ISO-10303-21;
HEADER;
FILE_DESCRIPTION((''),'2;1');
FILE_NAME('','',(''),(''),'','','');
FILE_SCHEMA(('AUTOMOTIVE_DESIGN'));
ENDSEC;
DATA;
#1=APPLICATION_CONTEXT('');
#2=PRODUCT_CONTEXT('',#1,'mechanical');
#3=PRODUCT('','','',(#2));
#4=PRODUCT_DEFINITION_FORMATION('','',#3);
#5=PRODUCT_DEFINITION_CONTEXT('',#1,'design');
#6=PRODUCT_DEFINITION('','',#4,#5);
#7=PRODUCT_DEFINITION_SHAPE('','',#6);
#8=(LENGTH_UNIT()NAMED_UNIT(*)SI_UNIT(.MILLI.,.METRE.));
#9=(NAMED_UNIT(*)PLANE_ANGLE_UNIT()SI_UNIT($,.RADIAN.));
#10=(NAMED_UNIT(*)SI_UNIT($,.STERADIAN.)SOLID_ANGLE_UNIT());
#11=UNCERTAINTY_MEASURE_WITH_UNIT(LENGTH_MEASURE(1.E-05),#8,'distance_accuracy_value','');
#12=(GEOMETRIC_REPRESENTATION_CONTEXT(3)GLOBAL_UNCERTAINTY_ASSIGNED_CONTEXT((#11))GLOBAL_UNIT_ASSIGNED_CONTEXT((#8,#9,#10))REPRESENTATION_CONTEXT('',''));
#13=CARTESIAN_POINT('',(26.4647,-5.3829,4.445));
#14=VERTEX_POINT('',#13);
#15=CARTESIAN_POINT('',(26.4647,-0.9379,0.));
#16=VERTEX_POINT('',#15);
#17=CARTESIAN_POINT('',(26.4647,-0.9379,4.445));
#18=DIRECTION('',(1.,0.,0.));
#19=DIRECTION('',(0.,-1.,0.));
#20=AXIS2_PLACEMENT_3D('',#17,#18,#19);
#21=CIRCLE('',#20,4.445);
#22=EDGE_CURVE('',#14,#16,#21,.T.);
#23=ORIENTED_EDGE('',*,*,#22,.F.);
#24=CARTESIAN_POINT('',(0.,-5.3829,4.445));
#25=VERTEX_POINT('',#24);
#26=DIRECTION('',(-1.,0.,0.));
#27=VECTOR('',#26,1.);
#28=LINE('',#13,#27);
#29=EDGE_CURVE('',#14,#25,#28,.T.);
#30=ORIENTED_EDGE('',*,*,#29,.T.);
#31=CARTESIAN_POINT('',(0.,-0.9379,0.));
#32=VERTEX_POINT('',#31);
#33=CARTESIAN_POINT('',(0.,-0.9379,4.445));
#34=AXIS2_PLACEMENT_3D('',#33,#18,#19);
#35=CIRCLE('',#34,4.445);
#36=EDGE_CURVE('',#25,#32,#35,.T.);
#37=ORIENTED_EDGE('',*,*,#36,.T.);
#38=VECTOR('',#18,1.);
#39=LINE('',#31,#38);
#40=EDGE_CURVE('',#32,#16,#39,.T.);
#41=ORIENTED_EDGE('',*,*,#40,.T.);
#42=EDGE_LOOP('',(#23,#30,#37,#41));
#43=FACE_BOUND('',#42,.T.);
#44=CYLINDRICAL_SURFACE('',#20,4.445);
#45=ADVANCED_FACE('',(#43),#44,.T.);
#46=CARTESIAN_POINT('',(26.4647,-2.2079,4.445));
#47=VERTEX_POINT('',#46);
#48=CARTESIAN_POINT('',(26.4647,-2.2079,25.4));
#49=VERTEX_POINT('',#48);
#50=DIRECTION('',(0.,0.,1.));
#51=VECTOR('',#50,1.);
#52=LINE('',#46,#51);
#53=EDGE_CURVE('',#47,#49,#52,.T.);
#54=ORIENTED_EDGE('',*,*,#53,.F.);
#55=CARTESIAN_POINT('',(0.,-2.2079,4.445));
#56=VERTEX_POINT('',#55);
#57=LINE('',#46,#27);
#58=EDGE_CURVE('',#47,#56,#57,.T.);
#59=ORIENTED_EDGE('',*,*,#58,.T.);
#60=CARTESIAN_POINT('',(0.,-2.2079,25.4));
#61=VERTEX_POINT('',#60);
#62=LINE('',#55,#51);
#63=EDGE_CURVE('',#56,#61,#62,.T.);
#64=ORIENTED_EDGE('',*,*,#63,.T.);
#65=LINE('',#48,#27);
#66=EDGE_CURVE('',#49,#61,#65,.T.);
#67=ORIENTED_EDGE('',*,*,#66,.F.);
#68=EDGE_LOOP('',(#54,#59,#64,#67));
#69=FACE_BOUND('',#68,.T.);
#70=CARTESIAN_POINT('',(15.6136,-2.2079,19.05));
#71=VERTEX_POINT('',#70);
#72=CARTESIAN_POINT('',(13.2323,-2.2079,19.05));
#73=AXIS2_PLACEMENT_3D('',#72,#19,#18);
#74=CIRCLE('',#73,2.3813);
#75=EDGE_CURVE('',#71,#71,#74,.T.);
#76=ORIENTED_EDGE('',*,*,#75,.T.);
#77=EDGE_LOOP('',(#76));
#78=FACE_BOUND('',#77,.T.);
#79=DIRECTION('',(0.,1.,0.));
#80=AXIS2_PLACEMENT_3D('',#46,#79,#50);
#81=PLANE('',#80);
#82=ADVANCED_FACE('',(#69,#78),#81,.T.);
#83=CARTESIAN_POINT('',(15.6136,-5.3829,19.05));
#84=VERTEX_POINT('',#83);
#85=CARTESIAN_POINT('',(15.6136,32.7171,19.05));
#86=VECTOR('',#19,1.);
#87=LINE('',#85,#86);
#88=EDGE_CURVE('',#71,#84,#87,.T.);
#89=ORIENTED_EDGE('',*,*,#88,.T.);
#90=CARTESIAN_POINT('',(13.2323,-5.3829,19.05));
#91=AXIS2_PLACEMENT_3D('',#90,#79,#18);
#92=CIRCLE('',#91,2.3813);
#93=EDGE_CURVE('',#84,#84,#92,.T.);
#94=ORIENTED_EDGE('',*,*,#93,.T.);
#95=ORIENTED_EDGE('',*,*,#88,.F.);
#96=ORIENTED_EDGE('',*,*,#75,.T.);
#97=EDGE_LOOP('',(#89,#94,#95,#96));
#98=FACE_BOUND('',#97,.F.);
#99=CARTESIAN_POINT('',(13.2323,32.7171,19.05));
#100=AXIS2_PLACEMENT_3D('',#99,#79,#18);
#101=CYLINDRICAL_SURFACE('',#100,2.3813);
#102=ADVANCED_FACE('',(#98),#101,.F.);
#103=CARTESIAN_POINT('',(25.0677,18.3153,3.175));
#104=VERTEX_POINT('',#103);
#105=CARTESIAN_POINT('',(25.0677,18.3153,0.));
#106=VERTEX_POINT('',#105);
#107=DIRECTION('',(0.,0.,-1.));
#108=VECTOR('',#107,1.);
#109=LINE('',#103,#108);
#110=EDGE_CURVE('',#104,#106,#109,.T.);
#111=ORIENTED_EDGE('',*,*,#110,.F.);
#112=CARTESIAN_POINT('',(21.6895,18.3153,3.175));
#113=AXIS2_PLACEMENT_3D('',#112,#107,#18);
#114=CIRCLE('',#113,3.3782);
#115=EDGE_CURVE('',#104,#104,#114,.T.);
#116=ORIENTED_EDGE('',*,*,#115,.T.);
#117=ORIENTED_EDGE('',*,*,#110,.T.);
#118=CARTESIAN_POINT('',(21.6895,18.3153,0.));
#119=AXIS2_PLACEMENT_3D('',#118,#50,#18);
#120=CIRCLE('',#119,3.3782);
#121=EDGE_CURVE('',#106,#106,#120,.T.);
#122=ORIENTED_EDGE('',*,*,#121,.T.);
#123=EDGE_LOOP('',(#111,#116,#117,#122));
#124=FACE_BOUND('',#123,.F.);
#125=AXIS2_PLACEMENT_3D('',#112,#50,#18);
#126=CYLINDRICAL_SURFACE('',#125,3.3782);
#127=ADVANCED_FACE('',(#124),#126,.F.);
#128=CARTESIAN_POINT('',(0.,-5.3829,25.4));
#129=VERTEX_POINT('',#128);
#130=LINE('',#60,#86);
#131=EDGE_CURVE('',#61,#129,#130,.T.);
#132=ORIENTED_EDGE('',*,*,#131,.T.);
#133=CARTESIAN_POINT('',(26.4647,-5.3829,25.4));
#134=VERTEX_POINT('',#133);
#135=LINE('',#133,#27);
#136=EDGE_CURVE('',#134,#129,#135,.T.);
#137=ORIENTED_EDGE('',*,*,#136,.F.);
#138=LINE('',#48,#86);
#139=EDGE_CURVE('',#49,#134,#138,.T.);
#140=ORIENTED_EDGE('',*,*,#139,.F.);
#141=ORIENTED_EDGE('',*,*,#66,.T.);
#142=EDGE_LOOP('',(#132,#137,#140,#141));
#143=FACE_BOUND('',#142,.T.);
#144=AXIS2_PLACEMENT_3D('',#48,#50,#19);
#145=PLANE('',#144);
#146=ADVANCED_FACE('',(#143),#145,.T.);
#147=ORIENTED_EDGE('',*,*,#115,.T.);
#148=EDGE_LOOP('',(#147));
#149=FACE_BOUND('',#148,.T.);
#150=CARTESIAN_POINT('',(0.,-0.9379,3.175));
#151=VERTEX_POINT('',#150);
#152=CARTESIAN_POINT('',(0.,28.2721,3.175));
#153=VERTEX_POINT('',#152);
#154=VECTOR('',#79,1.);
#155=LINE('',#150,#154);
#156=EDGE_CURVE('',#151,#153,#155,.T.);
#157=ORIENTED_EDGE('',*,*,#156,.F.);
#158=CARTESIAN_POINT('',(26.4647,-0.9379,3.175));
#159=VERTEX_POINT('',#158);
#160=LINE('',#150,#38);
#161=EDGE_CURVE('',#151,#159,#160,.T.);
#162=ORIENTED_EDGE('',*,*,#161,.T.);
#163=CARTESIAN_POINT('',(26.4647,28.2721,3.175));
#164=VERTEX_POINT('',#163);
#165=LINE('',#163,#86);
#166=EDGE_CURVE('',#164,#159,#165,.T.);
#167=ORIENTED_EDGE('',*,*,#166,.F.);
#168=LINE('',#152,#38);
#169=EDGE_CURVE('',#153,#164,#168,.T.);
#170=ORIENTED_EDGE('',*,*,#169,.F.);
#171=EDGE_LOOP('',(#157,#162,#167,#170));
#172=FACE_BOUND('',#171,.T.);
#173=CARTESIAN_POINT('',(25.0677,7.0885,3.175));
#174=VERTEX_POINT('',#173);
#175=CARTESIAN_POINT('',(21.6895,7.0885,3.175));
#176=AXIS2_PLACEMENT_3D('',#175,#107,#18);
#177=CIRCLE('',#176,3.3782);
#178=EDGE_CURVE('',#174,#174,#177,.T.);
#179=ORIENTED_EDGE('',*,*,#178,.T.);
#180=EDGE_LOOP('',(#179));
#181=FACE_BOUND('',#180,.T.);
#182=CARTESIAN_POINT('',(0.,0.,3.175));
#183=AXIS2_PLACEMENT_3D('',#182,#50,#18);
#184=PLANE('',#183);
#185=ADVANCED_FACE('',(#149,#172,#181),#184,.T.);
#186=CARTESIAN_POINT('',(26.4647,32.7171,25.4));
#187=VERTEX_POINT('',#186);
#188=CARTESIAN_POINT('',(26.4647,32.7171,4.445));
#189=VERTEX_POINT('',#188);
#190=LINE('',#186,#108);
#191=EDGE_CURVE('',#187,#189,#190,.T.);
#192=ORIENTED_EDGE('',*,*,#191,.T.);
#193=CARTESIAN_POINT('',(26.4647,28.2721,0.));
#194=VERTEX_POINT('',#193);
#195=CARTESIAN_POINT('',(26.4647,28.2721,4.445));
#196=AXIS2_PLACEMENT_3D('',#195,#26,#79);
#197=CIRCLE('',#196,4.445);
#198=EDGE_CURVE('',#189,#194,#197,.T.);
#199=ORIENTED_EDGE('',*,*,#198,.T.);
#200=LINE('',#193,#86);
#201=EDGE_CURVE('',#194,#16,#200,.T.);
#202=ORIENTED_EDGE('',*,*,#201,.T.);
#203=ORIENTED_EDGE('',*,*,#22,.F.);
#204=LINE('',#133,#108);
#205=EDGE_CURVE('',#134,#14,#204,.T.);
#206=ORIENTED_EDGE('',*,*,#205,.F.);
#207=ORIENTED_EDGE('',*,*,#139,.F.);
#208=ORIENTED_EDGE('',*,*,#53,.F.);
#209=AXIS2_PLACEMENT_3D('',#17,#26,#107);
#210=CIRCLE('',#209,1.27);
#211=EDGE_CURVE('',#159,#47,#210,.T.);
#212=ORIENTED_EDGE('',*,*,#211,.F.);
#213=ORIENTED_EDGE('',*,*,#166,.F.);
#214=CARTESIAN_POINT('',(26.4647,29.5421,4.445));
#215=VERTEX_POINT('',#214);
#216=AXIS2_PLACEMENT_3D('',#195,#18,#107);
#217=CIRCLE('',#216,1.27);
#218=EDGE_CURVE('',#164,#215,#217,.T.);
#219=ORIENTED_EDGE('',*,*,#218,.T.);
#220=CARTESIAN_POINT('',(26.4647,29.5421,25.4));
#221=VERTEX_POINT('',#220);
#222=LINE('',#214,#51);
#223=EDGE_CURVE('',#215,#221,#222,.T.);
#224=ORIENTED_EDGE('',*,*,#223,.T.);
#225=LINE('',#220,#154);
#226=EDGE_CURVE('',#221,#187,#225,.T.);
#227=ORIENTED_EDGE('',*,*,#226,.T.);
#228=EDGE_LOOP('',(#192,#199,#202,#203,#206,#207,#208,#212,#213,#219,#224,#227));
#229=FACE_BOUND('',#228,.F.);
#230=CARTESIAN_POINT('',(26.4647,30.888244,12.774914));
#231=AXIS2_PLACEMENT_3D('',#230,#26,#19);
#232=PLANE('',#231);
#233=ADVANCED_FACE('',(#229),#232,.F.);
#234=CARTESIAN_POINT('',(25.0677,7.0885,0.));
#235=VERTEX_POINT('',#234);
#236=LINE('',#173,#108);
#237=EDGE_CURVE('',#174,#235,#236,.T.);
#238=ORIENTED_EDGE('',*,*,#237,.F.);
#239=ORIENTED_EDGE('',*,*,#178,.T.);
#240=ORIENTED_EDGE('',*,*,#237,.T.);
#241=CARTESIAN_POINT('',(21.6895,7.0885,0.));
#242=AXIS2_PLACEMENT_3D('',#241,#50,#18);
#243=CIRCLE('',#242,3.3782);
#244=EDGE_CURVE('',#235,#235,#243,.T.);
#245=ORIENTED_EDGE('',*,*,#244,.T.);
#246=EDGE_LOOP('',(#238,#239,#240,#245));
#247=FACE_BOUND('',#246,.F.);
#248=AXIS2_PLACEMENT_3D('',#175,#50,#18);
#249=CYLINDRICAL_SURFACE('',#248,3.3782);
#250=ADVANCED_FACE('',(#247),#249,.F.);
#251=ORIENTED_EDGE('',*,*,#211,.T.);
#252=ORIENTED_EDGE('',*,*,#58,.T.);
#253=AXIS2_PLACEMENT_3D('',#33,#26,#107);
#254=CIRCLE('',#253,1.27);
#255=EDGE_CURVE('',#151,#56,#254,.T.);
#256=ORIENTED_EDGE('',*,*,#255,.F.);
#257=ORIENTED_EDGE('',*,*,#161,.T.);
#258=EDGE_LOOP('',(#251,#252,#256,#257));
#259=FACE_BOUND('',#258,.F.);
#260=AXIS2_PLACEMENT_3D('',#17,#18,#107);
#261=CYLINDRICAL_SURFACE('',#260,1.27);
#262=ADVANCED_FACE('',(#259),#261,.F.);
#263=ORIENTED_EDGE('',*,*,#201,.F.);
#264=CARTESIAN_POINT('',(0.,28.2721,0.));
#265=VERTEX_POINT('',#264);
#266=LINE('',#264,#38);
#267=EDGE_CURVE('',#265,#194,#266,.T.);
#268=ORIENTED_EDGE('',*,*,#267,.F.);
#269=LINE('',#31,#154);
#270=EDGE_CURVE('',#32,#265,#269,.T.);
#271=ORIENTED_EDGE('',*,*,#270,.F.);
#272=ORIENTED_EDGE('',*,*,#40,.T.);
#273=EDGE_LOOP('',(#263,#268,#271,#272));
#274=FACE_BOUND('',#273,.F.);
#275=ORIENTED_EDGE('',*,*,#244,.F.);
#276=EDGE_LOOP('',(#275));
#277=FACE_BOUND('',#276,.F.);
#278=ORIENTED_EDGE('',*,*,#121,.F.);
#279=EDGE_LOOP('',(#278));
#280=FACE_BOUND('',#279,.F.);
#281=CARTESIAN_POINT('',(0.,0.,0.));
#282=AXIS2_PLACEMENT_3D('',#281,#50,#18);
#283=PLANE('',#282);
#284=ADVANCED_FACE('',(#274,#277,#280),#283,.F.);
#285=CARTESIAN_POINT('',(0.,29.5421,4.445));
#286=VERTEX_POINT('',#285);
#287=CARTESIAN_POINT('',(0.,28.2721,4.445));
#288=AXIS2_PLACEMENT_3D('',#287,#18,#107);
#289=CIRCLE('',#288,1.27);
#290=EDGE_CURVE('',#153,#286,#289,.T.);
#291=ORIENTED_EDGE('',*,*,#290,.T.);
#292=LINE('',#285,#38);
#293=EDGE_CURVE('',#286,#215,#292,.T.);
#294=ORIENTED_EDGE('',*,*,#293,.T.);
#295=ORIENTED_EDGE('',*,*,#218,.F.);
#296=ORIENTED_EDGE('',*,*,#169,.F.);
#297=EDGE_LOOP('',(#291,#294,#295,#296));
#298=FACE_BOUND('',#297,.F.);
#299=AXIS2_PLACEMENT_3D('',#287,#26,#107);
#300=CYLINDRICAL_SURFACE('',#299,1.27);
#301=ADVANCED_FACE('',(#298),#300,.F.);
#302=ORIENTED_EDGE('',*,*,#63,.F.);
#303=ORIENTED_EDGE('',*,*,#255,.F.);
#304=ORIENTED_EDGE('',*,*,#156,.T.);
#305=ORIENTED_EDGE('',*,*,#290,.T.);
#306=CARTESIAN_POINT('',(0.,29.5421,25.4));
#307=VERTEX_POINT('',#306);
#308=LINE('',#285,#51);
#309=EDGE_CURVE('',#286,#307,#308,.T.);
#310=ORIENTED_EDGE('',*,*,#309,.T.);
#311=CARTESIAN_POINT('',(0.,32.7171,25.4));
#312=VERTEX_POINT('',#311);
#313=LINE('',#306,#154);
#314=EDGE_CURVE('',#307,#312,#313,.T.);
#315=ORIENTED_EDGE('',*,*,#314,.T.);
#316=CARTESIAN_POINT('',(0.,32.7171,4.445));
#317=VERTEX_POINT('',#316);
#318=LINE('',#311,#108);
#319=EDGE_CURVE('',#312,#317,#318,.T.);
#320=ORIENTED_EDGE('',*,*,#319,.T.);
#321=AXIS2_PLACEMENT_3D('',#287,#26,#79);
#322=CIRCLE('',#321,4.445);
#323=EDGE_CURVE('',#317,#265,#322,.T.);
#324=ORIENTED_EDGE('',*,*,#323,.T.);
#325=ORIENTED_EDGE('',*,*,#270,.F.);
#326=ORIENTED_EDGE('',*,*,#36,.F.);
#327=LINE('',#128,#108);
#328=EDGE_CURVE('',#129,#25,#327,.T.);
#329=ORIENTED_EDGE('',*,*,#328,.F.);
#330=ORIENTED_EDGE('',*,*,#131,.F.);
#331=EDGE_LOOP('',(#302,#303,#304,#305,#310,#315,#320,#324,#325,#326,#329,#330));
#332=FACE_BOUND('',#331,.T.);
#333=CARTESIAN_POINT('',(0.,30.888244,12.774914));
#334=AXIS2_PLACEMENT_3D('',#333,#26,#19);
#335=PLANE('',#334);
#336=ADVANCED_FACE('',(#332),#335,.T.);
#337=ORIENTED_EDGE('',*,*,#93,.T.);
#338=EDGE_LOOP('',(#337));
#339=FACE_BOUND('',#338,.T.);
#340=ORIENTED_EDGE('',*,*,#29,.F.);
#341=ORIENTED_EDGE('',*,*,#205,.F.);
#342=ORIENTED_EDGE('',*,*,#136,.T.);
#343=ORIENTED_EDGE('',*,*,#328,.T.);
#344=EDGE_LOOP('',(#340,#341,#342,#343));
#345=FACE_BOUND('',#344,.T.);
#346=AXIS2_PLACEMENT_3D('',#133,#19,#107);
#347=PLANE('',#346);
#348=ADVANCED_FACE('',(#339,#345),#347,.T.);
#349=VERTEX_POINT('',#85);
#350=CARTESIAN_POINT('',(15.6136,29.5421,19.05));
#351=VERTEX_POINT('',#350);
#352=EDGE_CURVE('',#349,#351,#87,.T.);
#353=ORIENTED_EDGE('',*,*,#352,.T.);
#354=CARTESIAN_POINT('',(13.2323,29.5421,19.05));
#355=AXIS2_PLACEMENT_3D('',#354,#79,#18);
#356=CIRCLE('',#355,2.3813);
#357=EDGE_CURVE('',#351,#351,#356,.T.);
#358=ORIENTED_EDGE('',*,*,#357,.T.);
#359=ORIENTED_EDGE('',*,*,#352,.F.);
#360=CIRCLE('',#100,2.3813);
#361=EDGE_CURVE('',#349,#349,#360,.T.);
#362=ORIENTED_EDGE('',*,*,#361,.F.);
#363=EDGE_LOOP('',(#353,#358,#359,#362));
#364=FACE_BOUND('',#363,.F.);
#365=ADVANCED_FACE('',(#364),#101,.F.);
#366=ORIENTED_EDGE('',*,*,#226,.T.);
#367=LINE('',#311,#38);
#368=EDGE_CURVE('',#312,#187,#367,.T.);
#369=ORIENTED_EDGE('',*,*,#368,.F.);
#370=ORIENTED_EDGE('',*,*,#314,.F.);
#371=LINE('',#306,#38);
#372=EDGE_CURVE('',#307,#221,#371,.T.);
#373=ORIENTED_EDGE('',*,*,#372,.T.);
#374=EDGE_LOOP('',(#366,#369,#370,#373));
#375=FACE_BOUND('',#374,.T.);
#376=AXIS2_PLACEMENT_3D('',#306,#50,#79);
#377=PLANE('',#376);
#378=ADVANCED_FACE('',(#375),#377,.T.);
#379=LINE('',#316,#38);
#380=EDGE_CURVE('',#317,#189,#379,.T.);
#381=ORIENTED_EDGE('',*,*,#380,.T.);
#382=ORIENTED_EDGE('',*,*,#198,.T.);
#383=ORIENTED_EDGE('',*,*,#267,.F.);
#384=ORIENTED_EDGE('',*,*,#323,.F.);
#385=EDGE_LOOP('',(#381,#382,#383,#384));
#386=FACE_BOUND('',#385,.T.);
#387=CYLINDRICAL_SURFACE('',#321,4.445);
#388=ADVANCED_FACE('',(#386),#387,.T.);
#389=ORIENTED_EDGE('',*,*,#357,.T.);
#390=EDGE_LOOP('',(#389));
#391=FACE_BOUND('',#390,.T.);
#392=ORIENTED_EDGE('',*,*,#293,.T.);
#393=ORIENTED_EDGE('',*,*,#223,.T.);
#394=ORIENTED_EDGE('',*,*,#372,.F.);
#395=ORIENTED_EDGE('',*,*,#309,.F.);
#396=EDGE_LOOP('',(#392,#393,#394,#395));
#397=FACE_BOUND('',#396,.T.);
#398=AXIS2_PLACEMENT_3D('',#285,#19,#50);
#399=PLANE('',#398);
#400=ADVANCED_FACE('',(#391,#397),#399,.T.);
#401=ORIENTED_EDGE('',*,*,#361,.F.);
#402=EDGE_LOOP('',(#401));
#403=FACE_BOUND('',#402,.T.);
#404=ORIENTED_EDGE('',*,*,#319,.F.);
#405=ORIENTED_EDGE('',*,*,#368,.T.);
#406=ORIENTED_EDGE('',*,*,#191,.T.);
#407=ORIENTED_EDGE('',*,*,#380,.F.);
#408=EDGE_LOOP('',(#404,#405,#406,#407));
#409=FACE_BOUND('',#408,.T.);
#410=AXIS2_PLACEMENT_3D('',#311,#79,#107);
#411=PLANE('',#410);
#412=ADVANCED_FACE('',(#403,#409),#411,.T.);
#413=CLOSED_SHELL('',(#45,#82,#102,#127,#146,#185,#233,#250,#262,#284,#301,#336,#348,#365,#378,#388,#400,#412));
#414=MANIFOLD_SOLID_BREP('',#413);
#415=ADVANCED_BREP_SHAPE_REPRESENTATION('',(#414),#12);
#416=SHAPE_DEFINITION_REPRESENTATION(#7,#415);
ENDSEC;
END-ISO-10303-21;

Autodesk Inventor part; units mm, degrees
ref_plane "YZ Plane" through (0, 0, 0) normal (1, 0, 0) x (0, 1, 0)
ref_plane "XZ Plane" through (0, 0, 0) normal (0, 1, 0) x (-1, 0, 0)
ref_plane "XY Plane" through (0, 0, 0) normal (0, 0, 1) x (1, 0, 0)
sketch "Sketch1" plane through (0, 0, 0) normal (0, 0, 1) x (1, 0, 0)
  circle A0 centre (5.881, 13.6671) radius 3.1287
  circle A1 centre (20.5836, 13.6671) radius 3.1287
  line L0 (0, -0.9379) -> (26.4647, -0.9379)
  line L1 (26.4647, 28.2721) -> (26.4647, -0.9379)
  line L2 (0, 28.2721) -> (26.4647, 28.2721)
  line L3 (0, -0.9379) -> (0, 28.2721)
  point P0 (0, 0)
  dimension "d4" = 14.7026
  dimension "d5" = 29.21
  dimension "d21" = 14.605
extrude "Plate1" add sketch "Sketch1" along normal blind 3.175 contours A0 | A1 | L3 L2 L1 L0
sketch "Sketch2" plane through (0, 29.5421, 4.445) normal (0, 1, 0) x (-1, 0, 0)
  line L0 (-26.4647, 0) -> (0, 0)
  line L1 (0, 0) -> (0, 20.955)
  line L2 (0, 20.955) -> (-26.4647, 20.955)
  line L3 (-26.4647, 20.955) -> (-26.4647, 0)
edge flange "Flange1" height 25.4 angle 90 thickness 3.175 bend radius 1.27 thickness toward (0, 1, 0) relief straight relief width 3.175 relief depth 1.5875 corner gap 3.175 corner form 0 edges at (13.2323, 28.2721, 3.175) (13.2323, -0.9379, 3.175) wall of the first edge with corners at (26.4647, 29.5421, 4.445) (0, 29.5421, 4.445) (0, 29.5421, 25.4) (26.4647, 29.5421, 25.4)
bend "Bend1"
corner "Corner1"
sketch "Sketch3" plane through (0, 32.7171, 25.4) normal (0, 1, 0) x (1, 0, 0)
  line L0 (26.4647, 0) -> (0, 0) projected
  line L1 (26.4647, 20.955) -> (26.4647, 0) projected
  line L2 (13.2323, 0) -> (13.2323, 6.35)
  circle A0 centre (13.2323, 6.35) radius 2.3813
  point P0 (0, 25.4)
  dimension "d17" = 6.35
  dimension "d18" = 4.7625
extrude "Extrusion1" cut sketch "Sketch3" against normal blind 76174.6
sketch "Sketch9" plane through (0, 0, 3.175) normal (0, 0, 1) x (1, 0, 0)
  line L0 (26.4647, 28.2721) -> (26.4647, -0.9379) projected
  line L1 (0, 28.2721) -> (26.4647, 28.2721) projected
  line L2 (26.4647, 28.2721) -> (21.6895, 28.2721)
  line L3 (21.6895, 28.2721) -> (21.6895, 18.3153)
  line L4 (21.6895, 18.3153) -> (21.6895, 7.0885)
  circle A0 centre (21.6895, 18.3153) radius 3.3782
  circle A1 centre (21.6895, 7.0885) radius 3.3782
  line L5 (26.4647, -0.9379) -> (0, -0.9379) projected
  line L6 (21.6895, 7.0885) -> (21.6895, -0.9379)
  point P0 (0, 0)
  dimension "d31" = 6.7564
  dimension "d33" = 6.7564
  dimension "d34" = 4.7752
  dimension "d37" = 8.0264
  dimension "d38" = 11.2268
extrude "Cut4" cut sketch "Sketch9" against normal blind 3.175 contours A0 L4 L3 | L3 L4 A0 | L6 L4 A1 | A1 L4 L6
equation "\"d35\" = Thickness"
equation "\"d7\" = BendReliefWidth"
equation "\"d8\" = BendReliefDepth"
equation "\"d9\" = MinimumRemnant"
equation "\"d10\" = BendRadius"
equation "\"d14\" = CornerReliefSize"
equation "\"d15\" = GapSize"
equation "\"d16\" = JacobiRadiusSize"
equation "\"BendRadius\" = Thickness"
equation "\"BendReliefWidth\" = Thickness"
equation "\"BendReliefDepth\" = 0.5 * Thickness"
equation "\"CornerReliefSize\" = 4 * Thickness"
equation "\"MinimumRemnant\" = 2 * Thickness"
equation "\"TransitionRadius\" = BendRadius"
equation "\"JacobiRadiusSize\" = Thickness"
equation "\"GapSize\" = Thickness"
equation "\"d6\" = BendRadius"
equation "\"Thickness\" = 3.175"
properties part number "pulley mount actual sideways left" material "Aluminum 6061"
